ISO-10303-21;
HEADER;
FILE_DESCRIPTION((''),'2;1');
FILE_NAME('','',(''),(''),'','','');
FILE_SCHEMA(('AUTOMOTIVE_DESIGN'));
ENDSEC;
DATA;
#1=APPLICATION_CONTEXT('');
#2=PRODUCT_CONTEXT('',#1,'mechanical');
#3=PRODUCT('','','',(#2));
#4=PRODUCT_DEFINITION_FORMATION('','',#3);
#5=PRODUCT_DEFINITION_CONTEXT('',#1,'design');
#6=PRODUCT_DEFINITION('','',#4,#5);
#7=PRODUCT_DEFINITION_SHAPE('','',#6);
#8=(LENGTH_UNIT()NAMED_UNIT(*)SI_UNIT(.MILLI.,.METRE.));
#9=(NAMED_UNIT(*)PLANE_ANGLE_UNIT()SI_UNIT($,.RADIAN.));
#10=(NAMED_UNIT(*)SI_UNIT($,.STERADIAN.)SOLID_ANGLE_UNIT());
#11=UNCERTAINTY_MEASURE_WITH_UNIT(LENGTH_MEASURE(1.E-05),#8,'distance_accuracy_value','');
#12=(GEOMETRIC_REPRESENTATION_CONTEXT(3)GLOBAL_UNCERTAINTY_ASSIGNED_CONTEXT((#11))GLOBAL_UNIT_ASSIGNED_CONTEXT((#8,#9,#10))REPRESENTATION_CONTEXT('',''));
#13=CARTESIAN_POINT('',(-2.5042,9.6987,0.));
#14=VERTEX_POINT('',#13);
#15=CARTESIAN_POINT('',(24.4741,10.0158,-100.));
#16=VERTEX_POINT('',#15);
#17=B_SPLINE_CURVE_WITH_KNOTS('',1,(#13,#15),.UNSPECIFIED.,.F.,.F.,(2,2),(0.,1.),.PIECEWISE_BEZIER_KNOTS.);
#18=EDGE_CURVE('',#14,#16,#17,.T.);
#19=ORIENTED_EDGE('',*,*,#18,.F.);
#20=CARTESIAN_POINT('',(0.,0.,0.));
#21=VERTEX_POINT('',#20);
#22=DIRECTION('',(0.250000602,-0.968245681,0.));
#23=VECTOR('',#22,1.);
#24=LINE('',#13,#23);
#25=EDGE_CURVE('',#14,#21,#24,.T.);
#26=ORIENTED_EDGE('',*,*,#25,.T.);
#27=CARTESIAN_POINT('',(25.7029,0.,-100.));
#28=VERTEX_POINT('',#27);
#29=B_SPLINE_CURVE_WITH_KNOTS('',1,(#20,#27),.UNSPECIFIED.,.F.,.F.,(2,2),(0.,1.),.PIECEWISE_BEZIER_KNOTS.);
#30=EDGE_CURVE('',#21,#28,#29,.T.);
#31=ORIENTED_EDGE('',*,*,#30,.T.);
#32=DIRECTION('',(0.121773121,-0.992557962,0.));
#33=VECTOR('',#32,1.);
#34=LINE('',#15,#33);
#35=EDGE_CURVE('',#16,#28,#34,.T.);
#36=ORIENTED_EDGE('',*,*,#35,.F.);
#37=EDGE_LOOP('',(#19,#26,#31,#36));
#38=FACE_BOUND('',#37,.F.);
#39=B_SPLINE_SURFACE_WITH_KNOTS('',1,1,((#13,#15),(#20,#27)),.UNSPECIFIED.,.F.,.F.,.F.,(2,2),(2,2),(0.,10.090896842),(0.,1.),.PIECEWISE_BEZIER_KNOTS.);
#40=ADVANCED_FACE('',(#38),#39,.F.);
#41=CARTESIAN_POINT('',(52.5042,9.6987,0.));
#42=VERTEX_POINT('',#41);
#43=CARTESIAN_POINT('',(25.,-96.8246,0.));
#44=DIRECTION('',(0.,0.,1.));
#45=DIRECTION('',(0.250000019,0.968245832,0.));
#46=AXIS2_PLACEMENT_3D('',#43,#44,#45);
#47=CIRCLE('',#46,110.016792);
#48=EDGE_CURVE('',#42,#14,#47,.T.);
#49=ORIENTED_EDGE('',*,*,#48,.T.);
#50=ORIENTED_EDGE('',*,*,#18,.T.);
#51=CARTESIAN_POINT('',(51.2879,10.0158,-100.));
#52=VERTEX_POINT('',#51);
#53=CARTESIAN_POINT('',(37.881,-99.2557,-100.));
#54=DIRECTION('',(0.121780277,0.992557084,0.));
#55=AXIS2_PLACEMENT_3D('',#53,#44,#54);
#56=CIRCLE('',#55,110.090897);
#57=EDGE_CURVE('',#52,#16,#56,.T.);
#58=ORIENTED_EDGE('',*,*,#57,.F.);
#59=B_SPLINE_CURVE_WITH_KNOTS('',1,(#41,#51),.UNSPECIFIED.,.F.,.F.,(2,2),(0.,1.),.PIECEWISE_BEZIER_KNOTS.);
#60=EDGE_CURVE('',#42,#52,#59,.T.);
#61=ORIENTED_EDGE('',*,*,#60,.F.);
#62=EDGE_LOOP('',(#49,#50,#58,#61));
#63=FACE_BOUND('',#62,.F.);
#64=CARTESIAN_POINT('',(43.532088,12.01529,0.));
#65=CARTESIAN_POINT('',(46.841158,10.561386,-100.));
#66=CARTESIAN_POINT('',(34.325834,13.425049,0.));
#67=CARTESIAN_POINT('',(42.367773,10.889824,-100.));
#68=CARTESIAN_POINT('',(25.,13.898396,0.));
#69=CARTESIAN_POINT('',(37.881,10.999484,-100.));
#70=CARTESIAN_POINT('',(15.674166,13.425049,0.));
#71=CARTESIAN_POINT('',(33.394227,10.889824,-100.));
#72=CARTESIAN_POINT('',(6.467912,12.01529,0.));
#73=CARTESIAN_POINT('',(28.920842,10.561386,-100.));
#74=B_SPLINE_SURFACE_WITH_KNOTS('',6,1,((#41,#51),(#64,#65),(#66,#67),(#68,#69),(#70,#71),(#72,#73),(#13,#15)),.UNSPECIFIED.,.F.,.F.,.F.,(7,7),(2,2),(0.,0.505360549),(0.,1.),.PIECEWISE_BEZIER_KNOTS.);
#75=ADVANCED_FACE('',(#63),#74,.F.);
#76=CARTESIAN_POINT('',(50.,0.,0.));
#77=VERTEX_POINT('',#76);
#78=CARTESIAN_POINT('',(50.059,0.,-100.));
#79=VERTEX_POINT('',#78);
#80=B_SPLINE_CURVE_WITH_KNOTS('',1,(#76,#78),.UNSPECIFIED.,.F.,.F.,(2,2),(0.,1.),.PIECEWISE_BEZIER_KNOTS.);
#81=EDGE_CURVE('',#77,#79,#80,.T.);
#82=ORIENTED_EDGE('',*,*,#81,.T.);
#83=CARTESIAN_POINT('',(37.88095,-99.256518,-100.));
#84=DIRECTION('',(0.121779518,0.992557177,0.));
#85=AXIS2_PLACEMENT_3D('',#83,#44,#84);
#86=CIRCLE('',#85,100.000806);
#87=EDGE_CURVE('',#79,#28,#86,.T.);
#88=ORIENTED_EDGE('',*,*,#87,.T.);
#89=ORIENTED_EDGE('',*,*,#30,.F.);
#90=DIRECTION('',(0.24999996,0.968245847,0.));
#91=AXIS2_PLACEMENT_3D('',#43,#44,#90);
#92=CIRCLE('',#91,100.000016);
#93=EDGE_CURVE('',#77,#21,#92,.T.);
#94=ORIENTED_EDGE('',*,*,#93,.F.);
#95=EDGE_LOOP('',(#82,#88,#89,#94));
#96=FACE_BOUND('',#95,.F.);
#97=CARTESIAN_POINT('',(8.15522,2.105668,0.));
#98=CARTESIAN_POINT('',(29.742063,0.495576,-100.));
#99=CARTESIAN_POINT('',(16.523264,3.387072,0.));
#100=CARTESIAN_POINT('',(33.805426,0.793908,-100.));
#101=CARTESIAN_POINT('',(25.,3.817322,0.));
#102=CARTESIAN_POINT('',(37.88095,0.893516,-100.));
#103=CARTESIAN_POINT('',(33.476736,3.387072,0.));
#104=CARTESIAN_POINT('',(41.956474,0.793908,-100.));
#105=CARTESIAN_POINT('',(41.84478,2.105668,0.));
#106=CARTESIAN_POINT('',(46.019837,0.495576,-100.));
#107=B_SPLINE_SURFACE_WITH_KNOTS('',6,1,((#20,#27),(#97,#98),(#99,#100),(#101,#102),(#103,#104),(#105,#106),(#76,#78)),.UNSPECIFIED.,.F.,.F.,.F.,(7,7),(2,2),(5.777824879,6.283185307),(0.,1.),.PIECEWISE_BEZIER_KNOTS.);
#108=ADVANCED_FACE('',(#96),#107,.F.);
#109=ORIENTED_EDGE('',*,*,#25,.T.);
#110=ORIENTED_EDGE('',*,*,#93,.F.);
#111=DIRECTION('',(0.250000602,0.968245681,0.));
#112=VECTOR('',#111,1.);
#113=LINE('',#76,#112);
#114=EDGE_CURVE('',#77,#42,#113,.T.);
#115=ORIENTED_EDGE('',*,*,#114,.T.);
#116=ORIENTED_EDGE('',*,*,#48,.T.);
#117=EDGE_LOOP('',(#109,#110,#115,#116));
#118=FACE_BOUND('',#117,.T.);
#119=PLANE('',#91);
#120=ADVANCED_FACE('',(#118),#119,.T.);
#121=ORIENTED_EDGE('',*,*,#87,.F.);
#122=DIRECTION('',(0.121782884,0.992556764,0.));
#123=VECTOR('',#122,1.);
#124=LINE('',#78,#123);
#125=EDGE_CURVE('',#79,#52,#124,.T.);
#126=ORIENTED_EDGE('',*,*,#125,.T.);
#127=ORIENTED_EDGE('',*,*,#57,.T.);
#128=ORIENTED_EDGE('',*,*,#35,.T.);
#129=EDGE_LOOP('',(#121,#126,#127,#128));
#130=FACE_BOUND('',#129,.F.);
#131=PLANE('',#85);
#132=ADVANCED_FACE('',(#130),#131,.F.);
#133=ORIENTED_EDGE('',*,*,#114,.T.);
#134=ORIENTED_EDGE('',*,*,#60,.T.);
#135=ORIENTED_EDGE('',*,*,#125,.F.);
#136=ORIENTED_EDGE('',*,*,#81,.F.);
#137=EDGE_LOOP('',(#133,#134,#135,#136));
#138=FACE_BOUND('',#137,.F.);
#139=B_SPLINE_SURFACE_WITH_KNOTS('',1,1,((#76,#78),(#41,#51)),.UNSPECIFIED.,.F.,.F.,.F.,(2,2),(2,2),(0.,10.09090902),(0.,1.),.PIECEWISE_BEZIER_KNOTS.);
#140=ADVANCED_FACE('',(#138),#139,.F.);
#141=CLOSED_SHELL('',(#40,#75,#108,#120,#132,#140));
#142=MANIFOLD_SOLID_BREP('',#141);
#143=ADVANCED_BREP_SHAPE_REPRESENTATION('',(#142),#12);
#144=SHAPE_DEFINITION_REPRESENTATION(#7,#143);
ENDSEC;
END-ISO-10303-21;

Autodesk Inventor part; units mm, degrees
ref_plane "YZ Plane" through (0, 0, 0) normal (1, 0, 0) x (0, 1, 0)
ref_plane "XZ Plane" through (0, 0, 0) normal (0, 1, 0) x (-1, 0, 0)
sketch "Sketch1" plane through (0, 0, 0) normal (0, 0, 1) x (1, 0, 0)
  arc A0 (50, 0) -> (0, 0) centre (25, -96.8246) ccw
  arc A1 (52.5042, 9.6987) -> (-2.5042, 9.6987) centre (25, -96.8246) ccw
  line L0 (-2.5042, 9.6987) -> (0, 0)
  line L1 (50, 0) -> (52.5042, 9.6987)
ref_plane "Work Plane1" through (0, 0, -100) normal (0, 0, 1) x (1, 0, 0)
sketch "Sketch2" plane through (0, 0, -100) normal (0, 0, 1) x (1, 0, 0)
  arc A0 (50.059, 0) -> (25.7029, 0) centre (37.881, -99.2557) ccw
  arc A1 (51.2879, 10.0158) -> (24.4741, 10.0158) centre (37.881, -99.2557) ccw
  line L0 (24.4741, 10.0158) -> (25.7029, 0)
  line L1 (50.059, 0) -> (51.2879, 10.0158)
  point P0 (0, 0)
loft "Loft1" add profiles "Sketch1", "Sketch2"
surface_offset "OffsetSrf1"
sketch "Sketch3" plane through (25, -96.8246, 0) normal (0, 0, 1) x (1, 0, 0)
  arc A0 (25, 96.8246) -> (-25, 96.8246) centre (0, 0) ccw projected
  line L0 (25, 96.8246) -> (27.5042, 106.5233) projected
  arc A1 (27.5042, 106.5233) -> (-27.5042, 106.5233) centre (0, 0) ccw projected
  line L1 (-27.5042, 106.5233) -> (-25, 96.8246) projected
  arc A2 (26.2521, 101.6739) -> (-26.2521, 101.6739) centre (0, 5.1813) ccw
properties part number "Midsurf"
